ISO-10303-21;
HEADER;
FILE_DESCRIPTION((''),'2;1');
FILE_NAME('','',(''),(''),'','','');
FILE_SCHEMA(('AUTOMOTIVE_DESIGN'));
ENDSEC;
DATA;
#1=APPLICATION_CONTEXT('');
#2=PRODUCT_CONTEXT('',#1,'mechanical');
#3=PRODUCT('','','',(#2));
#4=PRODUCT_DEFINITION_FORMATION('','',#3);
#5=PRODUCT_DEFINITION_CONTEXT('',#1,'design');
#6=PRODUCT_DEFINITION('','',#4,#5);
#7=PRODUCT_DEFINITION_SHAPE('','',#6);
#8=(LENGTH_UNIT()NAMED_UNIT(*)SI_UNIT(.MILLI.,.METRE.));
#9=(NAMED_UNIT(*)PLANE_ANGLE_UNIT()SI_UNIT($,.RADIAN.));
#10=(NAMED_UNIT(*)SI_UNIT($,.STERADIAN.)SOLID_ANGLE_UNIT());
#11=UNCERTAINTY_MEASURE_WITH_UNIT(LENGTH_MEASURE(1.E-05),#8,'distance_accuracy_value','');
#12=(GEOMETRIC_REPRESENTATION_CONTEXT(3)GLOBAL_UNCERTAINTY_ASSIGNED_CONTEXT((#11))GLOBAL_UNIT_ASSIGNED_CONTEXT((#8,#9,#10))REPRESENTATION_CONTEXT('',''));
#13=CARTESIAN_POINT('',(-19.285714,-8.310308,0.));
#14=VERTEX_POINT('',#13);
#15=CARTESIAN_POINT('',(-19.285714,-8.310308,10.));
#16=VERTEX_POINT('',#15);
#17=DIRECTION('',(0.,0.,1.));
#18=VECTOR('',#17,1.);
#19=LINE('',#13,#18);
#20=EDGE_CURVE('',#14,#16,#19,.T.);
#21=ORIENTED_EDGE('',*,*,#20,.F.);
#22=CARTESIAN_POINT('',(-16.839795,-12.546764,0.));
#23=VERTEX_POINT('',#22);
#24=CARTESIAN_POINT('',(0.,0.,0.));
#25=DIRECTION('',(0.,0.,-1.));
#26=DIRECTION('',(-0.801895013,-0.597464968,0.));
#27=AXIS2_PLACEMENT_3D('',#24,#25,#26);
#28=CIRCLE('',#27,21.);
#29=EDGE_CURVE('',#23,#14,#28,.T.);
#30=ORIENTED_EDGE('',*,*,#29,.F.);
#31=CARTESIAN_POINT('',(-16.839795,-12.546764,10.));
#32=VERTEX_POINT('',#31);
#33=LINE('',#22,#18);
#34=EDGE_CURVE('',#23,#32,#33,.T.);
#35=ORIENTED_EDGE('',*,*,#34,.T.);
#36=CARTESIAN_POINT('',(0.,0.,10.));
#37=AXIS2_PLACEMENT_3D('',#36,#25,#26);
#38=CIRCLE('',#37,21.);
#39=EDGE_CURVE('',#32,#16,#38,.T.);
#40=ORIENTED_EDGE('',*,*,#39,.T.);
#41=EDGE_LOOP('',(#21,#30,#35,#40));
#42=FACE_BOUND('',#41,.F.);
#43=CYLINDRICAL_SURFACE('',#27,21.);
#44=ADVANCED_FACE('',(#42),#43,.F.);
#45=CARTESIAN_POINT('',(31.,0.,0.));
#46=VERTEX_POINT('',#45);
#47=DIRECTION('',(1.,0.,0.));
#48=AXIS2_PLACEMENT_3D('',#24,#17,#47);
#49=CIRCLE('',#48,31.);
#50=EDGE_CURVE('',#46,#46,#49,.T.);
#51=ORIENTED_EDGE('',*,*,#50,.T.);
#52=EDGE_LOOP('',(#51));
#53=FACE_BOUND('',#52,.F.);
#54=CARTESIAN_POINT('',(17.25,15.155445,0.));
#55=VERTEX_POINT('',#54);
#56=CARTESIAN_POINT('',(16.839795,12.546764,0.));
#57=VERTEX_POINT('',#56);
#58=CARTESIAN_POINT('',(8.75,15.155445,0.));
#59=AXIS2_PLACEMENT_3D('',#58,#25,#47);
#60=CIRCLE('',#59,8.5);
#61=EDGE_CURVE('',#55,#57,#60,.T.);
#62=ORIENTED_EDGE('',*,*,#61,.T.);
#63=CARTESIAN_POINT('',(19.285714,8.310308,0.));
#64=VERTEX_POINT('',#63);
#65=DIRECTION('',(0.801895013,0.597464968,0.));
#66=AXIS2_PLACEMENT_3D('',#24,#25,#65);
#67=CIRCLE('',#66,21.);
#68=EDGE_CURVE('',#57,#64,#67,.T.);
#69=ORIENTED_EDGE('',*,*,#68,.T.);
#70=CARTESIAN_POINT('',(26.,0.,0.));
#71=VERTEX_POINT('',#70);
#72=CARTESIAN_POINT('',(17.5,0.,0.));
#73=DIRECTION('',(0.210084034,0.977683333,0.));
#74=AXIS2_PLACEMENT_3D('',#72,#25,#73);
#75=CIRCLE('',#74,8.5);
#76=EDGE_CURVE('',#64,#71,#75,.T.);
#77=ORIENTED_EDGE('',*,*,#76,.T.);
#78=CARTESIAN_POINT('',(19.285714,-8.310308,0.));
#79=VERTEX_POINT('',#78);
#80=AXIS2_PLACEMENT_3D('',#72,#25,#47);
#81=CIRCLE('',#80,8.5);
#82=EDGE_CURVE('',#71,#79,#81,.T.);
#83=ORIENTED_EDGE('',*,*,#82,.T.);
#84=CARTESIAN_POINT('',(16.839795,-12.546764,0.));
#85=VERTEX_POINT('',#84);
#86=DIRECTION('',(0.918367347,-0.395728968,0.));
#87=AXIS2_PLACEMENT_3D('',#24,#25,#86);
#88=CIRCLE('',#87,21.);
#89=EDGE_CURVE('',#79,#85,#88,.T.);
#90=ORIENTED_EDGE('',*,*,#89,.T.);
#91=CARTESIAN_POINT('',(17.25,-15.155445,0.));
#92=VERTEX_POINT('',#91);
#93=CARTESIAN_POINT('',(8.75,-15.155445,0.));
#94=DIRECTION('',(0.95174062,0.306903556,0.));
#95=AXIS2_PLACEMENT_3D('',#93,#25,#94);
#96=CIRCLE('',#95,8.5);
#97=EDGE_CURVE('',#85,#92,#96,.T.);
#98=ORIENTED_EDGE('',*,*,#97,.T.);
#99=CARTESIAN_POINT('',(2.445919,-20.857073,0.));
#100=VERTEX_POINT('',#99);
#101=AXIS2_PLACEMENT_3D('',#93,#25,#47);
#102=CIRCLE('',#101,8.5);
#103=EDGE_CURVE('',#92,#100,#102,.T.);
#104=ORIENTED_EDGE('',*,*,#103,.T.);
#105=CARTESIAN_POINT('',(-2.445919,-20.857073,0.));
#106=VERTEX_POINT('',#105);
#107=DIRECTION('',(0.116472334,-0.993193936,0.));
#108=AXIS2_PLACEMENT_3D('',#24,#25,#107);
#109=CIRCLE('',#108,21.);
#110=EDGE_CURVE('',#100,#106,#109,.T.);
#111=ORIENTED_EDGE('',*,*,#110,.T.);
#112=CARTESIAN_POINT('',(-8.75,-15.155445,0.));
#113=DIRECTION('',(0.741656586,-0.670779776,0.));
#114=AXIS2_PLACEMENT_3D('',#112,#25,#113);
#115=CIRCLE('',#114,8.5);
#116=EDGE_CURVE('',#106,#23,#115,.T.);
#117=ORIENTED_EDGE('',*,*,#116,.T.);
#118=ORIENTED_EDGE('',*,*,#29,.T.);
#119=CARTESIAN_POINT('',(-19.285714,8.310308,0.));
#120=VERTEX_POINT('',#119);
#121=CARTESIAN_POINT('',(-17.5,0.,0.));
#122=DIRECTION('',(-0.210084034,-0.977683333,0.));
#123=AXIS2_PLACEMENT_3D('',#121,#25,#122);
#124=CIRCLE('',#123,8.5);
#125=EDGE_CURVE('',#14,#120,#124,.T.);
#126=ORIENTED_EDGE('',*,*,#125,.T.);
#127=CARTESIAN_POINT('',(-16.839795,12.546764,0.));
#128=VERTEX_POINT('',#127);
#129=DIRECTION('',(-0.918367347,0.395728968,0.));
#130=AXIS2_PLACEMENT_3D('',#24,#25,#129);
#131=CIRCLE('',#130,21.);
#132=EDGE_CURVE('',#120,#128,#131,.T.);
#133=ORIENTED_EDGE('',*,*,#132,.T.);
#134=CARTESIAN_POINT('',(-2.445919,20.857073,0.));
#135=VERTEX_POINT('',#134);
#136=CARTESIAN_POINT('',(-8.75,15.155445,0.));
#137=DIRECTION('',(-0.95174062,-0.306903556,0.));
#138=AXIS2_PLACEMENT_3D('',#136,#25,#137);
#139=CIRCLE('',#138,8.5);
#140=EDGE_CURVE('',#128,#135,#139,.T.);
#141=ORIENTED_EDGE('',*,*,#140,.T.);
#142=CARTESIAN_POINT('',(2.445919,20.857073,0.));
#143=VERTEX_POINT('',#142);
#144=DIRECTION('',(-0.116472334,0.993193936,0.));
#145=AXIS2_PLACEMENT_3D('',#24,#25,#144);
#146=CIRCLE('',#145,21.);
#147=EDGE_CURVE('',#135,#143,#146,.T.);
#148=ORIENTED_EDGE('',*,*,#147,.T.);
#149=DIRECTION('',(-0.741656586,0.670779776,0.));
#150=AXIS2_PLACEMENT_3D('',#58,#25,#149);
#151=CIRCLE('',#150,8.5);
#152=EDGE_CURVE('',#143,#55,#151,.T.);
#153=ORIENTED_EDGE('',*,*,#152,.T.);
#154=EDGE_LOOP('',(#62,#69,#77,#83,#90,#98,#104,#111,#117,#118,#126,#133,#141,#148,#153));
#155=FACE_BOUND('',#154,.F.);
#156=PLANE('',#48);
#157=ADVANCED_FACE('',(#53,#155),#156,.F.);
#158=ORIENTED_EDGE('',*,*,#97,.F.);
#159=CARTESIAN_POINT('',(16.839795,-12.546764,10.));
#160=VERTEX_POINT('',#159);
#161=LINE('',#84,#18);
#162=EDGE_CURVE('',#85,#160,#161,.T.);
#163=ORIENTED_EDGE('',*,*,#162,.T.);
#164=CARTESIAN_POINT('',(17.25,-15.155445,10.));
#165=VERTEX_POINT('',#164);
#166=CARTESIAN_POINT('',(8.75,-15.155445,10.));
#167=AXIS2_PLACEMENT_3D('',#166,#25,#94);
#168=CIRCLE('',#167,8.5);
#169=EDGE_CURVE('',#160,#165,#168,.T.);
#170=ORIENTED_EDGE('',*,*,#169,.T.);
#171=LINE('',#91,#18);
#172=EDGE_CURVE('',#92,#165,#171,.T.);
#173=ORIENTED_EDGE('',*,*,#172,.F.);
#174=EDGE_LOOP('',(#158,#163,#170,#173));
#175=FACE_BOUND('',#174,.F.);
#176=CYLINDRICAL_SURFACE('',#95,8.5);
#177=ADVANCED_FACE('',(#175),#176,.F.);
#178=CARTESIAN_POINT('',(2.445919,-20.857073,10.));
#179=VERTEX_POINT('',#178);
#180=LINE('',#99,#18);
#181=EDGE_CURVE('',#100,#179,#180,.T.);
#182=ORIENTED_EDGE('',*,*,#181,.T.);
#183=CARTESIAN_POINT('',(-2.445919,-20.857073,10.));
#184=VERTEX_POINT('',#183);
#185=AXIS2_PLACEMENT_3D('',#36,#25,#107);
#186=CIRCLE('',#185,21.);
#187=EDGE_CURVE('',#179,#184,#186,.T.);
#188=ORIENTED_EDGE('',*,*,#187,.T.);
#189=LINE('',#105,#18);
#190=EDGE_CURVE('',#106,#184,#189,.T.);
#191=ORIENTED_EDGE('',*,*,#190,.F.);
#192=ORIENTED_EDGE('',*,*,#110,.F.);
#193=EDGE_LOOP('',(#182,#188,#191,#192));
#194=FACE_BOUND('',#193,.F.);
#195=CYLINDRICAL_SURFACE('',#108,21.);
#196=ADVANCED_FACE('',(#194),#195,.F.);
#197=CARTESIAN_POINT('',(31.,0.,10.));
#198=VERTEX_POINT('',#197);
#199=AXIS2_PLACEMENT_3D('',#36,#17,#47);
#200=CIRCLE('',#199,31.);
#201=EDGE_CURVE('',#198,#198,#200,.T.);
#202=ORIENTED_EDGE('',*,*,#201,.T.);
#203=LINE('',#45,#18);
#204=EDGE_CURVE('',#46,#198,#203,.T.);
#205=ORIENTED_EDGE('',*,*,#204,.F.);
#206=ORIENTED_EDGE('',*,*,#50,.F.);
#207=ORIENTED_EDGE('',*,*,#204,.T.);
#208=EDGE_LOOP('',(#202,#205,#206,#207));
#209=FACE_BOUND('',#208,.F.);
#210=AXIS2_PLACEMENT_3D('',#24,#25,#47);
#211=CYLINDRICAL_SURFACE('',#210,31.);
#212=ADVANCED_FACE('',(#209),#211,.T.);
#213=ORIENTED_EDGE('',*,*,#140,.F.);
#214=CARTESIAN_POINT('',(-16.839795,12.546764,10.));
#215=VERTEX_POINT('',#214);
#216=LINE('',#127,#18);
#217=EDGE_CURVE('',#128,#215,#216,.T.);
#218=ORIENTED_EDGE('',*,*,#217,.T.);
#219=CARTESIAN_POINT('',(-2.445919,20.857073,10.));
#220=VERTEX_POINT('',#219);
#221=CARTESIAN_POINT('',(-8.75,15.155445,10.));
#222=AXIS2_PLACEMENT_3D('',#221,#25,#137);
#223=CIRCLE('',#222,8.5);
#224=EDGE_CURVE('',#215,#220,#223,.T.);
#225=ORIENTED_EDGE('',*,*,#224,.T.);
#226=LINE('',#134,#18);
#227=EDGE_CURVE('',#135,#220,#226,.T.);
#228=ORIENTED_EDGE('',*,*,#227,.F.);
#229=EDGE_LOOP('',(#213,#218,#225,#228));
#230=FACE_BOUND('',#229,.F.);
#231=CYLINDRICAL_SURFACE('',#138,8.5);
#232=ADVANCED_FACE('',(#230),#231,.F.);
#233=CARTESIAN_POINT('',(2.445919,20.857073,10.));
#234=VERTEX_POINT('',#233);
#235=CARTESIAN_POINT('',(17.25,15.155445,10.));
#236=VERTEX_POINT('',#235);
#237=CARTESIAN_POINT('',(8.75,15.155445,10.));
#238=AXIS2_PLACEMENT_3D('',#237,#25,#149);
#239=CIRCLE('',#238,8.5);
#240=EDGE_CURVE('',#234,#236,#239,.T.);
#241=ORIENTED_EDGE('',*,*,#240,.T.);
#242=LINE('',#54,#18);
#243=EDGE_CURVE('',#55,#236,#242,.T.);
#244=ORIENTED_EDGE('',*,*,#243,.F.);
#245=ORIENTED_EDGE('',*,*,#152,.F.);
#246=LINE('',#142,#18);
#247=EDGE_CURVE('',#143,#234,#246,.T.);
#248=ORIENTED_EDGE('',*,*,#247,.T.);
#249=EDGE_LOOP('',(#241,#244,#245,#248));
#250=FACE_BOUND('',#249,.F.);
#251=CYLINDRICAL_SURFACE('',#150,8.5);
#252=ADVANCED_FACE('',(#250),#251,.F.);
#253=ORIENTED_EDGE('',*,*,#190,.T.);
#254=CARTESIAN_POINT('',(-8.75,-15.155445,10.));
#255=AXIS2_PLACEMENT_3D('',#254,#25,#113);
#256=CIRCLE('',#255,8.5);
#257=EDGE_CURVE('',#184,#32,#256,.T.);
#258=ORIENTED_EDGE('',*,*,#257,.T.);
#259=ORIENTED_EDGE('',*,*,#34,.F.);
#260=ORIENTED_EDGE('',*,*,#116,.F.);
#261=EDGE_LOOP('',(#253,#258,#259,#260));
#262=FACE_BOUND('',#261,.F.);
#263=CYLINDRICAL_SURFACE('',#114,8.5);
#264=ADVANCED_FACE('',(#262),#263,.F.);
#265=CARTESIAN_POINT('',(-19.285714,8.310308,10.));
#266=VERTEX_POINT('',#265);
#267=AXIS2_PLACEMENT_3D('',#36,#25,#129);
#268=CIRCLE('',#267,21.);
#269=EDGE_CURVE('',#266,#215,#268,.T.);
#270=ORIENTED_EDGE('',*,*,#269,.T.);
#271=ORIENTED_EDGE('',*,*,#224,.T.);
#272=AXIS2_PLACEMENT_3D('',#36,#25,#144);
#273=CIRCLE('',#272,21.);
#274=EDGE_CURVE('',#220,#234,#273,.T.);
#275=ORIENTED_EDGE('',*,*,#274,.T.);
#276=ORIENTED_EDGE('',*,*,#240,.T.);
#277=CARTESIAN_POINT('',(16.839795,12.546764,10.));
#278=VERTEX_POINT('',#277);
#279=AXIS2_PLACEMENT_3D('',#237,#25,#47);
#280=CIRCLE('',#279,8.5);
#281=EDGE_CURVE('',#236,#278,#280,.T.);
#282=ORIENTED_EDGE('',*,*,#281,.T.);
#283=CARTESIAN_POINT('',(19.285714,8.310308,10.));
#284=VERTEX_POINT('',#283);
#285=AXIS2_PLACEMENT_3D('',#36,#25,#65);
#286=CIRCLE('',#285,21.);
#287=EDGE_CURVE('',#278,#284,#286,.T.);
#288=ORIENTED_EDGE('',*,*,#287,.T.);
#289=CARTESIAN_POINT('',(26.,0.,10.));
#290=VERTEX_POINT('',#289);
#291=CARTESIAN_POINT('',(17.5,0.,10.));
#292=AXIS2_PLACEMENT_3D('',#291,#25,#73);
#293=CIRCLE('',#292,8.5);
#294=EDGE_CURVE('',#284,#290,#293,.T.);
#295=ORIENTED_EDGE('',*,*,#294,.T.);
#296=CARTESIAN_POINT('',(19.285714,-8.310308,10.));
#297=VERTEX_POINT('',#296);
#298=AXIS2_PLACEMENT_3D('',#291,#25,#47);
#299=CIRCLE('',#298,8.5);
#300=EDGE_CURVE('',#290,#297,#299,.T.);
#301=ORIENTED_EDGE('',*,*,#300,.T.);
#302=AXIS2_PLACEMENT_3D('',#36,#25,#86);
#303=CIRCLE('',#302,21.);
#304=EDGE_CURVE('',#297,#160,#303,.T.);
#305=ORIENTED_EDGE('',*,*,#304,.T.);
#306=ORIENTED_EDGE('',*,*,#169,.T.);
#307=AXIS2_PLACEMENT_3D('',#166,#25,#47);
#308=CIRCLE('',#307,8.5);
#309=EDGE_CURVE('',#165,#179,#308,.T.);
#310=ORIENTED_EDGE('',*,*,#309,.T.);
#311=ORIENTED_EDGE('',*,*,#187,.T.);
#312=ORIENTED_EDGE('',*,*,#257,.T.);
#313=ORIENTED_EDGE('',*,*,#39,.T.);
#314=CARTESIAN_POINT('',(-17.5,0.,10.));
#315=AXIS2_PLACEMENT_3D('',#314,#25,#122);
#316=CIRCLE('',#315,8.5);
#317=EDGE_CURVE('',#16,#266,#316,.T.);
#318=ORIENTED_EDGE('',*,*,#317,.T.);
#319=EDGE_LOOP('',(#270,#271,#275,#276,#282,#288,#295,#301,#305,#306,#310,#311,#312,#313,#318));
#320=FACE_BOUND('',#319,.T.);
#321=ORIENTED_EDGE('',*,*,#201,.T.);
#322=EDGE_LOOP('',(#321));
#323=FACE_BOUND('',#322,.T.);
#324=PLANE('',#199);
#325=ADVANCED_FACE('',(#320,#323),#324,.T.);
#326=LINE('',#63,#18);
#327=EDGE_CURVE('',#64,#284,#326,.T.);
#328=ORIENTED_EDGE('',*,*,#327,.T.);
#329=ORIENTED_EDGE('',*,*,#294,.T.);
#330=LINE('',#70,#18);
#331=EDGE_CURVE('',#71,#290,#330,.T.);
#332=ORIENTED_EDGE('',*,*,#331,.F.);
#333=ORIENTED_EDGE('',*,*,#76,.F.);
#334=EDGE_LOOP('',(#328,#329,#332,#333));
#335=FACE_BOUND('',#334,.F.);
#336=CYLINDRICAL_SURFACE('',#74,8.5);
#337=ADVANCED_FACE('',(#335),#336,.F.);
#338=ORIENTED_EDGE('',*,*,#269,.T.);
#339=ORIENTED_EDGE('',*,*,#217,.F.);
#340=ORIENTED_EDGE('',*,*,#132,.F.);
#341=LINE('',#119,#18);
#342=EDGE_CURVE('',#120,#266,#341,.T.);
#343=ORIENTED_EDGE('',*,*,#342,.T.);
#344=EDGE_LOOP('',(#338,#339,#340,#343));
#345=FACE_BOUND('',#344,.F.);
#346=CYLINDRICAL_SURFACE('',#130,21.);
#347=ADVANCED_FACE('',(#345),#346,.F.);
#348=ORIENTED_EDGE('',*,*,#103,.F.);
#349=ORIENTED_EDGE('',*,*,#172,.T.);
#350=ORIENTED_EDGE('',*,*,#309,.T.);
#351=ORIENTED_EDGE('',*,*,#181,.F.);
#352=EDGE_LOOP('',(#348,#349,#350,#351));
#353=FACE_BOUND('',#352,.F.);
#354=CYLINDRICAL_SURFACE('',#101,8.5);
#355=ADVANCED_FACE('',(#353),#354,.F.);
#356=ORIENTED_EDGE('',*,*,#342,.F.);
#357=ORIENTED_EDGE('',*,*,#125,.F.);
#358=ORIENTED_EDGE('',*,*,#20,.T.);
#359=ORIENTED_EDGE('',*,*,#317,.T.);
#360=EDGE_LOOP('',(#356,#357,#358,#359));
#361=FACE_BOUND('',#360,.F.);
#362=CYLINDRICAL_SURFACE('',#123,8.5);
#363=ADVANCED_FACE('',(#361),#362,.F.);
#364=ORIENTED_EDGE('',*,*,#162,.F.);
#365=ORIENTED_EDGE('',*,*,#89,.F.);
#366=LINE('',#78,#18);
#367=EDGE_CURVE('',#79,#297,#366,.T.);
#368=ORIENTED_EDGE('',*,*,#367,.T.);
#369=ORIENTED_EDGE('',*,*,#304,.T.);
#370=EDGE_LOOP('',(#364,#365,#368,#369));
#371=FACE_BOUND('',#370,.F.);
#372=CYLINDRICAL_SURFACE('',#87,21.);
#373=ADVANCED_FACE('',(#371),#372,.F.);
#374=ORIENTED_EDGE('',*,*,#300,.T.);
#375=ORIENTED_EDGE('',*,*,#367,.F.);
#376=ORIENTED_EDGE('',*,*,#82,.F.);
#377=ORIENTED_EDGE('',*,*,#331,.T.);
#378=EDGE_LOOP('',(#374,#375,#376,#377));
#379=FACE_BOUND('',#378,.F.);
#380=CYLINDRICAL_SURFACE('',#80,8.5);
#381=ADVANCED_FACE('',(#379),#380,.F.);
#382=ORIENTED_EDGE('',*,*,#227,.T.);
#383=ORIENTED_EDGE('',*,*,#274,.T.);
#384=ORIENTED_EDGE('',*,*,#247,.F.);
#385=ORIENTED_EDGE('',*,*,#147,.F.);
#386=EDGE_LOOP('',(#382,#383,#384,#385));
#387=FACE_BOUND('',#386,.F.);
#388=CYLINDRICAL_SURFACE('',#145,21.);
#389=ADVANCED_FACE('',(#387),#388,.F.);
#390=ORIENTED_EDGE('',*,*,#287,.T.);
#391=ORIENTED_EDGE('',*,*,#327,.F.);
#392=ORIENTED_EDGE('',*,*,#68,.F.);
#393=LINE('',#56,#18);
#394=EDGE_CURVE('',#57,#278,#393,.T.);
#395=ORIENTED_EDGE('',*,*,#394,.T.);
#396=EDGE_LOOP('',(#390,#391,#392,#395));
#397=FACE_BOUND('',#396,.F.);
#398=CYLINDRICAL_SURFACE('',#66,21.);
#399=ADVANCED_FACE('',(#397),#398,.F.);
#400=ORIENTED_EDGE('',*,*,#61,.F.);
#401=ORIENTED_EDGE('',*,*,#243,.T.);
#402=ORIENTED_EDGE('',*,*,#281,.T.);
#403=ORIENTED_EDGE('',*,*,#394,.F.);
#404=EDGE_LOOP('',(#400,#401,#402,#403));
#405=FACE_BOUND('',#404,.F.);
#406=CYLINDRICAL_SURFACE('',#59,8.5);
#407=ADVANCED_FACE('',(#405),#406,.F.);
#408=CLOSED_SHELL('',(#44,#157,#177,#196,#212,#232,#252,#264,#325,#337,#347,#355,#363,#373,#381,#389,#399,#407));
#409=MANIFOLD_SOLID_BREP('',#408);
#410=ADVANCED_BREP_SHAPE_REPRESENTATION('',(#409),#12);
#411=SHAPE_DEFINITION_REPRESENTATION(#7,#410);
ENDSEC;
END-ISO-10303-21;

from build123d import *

# Parameters (mm, degrees)
F0_R     = 31
F1_DEPTH = 10


# Not quite as in the source:
# - a feature names something its author has since deleted; it is built from what else it names


with BuildPart() as f1:
    # F0 (on Top) → F1 (new body)
    with BuildSketch(Plane.XY):
        Circle(F0_R)
        with BuildLine():
            ThreePointArc((19.2857142857, 8.310308327), (24.1116779802, 5.3418830281), (26, 0))
            ThreePointArc((26, 0), (24.1116779802, -5.3418830281), (19.2857142857, -8.310308327))
            ThreePointArc((19.2857142857, -8.310308327), (18.1865334795, -10.5), (16.8397952673, -12.5467643381))
            ThreePointArc((16.8397952673, -12.5467643381), (17.1468226066, -13.83507715), (17.25, -15.1554445662))
            ThreePointArc((17.25, -15.1554445662), (11.8049395785, -23.0874899627), (2.4459190184, -20.8570726651))
            ThreePointArc((2.4459190184, -20.8570726651), (0, -21), (-2.4459190184, -20.8570726651))
            ThreePointArc((-2.4459190184, -20.8570726651), (-13, -22.5166604984), (-16.8397952673, -12.5467643381))
            ThreePointArc((-16.8397952673, -12.5467643381), (-18.1865334795, -10.5), (-19.2857142857, -8.310308327))
            ThreePointArc((-19.2857142857, -8.310308327), (-26, 0), (-19.2857142857, 8.310308327))
            ThreePointArc((-19.2857142857, 8.310308327), (-18.1865334795, 10.5), (-16.8397952673, 12.5467643381))
            ThreePointArc((-16.8397952673, 12.5467643381), (-13, 22.5166604984), (-2.4459190184, 20.8570726651))
            ThreePointArc((-2.4459190184, 20.8570726651), (0, 21), (2.4459190184, 20.8570726651))
            ThreePointArc((2.4459190184, 20.8570726651), (11.8049395785, 23.0874899627), (17.25, 15.1554445662))
            ThreePointArc((17.25, 15.1554445662), (17.1468226066, 13.83507715), (16.8397952673, 12.5467643381))
            ThreePointArc((16.8397952673, 12.5467643381), (18.1865334795, 10.5), (19.2857142857, 8.310308327))
        make_face(mode=Mode.SUBTRACT)
    extrude(amount=F1_DEPTH)


solid = f1.part
